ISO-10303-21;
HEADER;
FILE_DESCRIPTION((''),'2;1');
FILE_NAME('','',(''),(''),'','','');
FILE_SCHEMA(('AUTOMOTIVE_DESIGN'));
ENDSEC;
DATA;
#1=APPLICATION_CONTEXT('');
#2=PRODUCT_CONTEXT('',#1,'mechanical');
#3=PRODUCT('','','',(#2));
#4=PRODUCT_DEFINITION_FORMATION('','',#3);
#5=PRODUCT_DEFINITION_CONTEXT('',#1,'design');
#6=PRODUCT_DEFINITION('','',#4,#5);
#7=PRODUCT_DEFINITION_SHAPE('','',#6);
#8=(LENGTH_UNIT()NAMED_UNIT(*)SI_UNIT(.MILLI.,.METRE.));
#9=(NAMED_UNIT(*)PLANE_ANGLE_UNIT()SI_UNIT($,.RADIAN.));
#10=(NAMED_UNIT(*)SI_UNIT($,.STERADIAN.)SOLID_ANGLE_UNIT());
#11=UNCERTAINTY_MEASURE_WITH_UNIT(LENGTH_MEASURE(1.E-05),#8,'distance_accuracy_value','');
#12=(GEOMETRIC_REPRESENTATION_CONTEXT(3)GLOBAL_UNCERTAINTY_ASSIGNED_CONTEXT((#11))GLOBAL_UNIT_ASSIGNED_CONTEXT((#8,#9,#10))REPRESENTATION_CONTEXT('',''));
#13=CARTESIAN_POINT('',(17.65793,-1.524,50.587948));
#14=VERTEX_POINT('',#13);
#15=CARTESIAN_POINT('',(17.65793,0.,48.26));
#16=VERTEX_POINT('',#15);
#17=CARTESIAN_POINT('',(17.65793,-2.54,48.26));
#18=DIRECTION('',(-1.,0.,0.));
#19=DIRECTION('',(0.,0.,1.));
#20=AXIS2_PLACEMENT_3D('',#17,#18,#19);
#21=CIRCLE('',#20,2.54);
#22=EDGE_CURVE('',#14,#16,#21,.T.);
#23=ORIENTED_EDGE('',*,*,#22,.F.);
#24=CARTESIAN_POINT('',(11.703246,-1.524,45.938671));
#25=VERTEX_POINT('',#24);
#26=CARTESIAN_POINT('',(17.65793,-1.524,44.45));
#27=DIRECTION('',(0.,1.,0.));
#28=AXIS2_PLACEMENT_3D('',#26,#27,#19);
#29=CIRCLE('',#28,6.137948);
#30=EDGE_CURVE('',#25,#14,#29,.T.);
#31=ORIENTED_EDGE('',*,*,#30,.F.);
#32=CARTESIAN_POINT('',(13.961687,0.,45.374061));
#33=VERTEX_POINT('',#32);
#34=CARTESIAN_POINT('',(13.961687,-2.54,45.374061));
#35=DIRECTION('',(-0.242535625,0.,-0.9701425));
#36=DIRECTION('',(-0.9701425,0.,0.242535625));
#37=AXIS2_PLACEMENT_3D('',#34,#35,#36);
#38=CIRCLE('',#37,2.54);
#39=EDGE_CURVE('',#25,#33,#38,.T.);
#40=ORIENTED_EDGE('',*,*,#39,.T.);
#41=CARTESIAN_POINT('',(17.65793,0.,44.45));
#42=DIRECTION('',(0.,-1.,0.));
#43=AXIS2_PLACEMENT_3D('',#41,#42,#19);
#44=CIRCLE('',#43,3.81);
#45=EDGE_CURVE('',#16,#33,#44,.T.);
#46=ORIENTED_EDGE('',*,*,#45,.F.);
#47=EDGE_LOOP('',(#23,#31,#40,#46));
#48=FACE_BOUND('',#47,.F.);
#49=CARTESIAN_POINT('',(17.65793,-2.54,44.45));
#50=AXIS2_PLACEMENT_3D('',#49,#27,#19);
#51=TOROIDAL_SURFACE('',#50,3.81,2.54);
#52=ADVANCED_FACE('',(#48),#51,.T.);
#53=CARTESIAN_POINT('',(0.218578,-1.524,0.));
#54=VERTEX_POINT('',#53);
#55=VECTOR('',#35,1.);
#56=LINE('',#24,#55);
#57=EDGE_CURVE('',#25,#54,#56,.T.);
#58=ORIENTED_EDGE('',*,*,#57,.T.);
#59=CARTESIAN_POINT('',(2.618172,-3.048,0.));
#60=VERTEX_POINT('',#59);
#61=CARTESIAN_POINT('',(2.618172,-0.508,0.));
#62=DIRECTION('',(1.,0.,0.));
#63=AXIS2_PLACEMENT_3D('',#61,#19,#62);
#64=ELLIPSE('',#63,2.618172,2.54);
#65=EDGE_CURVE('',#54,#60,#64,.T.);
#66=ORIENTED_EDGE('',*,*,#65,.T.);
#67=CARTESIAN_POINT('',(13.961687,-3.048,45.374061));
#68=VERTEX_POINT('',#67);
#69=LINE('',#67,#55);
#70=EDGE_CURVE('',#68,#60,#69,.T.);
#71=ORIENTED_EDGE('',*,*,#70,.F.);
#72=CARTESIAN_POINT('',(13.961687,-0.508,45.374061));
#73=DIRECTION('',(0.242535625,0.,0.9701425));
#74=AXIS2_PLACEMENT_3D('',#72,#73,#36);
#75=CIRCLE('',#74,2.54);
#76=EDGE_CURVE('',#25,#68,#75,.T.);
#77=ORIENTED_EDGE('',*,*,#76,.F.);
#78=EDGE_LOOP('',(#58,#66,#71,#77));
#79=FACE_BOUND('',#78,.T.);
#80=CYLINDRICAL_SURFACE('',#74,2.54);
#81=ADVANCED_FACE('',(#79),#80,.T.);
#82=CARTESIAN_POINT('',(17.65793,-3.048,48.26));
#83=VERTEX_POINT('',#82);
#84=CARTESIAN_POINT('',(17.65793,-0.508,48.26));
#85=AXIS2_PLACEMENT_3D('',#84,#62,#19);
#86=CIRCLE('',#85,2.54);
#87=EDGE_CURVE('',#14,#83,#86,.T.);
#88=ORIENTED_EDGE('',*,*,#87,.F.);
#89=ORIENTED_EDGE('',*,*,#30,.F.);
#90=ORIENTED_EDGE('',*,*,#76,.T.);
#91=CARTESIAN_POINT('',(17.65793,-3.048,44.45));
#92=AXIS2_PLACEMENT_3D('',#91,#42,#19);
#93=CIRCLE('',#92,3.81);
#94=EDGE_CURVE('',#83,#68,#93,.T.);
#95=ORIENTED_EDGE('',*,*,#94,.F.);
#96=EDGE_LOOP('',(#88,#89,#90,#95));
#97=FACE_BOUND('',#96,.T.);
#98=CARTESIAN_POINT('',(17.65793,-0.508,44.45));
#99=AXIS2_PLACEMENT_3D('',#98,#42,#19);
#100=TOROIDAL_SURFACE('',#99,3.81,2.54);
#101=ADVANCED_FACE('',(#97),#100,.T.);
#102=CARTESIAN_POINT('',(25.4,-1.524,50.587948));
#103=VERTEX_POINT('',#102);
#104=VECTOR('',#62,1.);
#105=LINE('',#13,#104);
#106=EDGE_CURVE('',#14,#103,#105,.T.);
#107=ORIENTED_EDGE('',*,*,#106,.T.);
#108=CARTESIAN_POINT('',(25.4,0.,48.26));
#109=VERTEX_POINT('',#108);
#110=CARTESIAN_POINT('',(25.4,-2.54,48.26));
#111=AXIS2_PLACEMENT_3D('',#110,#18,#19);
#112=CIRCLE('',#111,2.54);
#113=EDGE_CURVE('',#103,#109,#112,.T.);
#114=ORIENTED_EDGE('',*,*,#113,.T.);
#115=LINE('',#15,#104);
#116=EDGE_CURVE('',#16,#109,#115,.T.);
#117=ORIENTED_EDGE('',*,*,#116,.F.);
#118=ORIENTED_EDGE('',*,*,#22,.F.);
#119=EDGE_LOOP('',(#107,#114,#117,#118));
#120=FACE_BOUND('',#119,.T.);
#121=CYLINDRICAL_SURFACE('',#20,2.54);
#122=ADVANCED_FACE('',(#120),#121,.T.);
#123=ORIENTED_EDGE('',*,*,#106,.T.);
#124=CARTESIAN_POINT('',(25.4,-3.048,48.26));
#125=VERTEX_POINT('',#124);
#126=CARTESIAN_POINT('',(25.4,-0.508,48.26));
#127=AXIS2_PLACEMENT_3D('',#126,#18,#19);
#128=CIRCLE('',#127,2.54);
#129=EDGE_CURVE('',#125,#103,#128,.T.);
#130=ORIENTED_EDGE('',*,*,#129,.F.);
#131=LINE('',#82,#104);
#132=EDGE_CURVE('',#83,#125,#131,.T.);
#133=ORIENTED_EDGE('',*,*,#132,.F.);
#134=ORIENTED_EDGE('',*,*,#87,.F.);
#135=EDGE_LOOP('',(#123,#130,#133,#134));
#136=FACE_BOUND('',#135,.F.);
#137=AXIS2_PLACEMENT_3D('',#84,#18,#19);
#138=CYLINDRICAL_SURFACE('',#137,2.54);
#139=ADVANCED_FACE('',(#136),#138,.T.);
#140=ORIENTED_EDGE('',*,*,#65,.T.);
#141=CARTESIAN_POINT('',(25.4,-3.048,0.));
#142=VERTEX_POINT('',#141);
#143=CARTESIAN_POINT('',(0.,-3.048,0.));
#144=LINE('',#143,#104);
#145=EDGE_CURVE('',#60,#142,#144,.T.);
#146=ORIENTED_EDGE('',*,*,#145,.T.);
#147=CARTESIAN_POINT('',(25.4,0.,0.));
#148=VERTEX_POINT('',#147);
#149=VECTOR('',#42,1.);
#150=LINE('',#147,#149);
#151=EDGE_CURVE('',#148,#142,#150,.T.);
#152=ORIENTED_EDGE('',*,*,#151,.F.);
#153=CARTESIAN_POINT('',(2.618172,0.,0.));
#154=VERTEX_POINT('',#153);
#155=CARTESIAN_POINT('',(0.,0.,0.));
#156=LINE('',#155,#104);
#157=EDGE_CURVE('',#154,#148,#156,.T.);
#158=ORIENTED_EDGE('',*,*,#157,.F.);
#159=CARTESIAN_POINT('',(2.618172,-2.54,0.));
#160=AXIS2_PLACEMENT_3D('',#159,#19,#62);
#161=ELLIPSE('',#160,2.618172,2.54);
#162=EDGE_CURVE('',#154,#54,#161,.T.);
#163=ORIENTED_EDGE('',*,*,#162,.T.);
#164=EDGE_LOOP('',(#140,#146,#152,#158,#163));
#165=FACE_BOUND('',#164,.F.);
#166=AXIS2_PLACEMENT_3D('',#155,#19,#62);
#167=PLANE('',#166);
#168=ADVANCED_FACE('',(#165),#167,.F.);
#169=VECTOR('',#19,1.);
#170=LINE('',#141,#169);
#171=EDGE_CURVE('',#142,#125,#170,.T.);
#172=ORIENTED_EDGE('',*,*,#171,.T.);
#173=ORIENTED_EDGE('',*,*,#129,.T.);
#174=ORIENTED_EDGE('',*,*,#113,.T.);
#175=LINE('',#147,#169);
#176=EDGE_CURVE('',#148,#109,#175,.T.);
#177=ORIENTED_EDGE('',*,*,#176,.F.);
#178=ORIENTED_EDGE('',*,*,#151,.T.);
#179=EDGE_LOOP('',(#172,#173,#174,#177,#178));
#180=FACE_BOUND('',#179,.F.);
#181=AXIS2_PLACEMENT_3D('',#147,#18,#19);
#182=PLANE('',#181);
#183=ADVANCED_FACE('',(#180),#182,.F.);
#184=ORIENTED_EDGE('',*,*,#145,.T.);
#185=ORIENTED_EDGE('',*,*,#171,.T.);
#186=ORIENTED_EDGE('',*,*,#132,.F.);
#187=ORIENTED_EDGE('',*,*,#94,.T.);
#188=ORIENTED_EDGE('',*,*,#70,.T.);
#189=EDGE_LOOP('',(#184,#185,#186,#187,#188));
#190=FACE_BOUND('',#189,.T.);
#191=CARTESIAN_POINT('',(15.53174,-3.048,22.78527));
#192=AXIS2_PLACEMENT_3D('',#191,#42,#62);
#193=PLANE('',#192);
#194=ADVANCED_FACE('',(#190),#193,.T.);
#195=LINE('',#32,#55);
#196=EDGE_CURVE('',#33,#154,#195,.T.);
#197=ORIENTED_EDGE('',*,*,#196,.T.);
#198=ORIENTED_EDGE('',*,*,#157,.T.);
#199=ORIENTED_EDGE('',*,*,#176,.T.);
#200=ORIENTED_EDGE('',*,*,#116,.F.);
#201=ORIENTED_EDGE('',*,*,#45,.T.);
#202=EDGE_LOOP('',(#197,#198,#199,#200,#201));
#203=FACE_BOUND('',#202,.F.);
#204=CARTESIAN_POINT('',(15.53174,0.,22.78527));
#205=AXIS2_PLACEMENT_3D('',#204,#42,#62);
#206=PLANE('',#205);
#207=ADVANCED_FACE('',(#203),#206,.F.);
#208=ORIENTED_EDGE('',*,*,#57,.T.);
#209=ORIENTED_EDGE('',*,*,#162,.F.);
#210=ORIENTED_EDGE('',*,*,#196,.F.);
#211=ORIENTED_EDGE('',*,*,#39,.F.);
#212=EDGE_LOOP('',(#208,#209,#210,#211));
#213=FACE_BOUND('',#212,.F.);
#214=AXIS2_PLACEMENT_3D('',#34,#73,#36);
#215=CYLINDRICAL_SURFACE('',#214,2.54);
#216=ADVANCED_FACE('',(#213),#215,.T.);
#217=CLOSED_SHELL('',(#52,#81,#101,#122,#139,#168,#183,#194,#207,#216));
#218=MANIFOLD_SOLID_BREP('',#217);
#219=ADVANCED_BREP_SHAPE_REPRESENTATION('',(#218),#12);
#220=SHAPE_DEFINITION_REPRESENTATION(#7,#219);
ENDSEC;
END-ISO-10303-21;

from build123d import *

# Parameters (mm, degrees)
F1_DEPTH    = 3.048
F2_T1_DEPTH = 53.7555112647
F2_T3_DEPTH = 14.0920698193
F2_T6_ANGLE = 75.9637565321
F2_T8_ANGLE = 75.9637565321


# Not quite as in the source:
# - a fillet or chamfer that OpenCascade refuses, or shapes differently, is made with other operations: its cross-section is extruded or revolved along the edge and cut away or added


with BuildPart() as f1:
    # F0 (on Front) → F1 (new body)
    with BuildSketch(Plane.XZ):
        with BuildLine():
            Line((25.4, 50.8), (17.6579301807, 50.8))
            ThreePointArc((17.6579301807, 50.8), (13.750062651, 49.4551045314), (11.4975253047, 45.990101219))
            Line((11.4975253047, 45.990101219), (0, 0))
            Line((0, 0), (25.4, 0))
            Line((25.4, 0), (25.4, 50.8))
        make_face()
    extrude(amount=F1_DEPTH)

    # F2: fillet of radius 2.54 on 2 edges, made by hand

    # F2_s2 → F2_t1 (cut)
    with BuildSketch(Plane(origin=(11.4975253047, 0, 45.990101219), x_dir=(0, 1, 0), z_dir=(-0.242535625, 0, -0.9701425001))):
        with BuildLine():
            ThreePointArc((-0.508, 0), (-2.3040512242, 0.7439487758), (-3.048, 2.54))
            Line((-3.048, 2.54), (-3.048, 0))
            Line((-3.048, 0), (-0.508, 0))
        make_face()
        with BuildLine():
            ThreePointArc((-2.54, 0), (-0.7439487758, 0.7439487758), (0, 2.54))
            Line((0, 2.54), (0, 0))
            Line((0, 0), (-2.54, 0))
        make_face()
    extrude(amount=F2_T1_DEPTH, mode=Mode.SUBTRACT)

    # F2_s4 → F2_t3 (cut)
    with BuildSketch(Plane.YZ.offset(17.6579301807)):
        with BuildLine():
            ThreePointArc((-2.54, 50.8), (-0.7439487758, 50.0560512242), (0, 48.26))
            Line((0, 48.26), (0, 50.8))
            Line((0, 50.8), (-2.54, 50.8))
        make_face()
        with BuildLine():
            ThreePointArc((-0.508, 50.8), (-2.3040512242, 50.0560512242), (-3.048, 48.26))
            Line((-3.048, 48.26), (-3.048, 50.8))
            Line((-3.048, 50.8), (-0.508, 50.8))
        make_face()
    extrude(amount=F2_T3_DEPTH, mode=Mode.SUBTRACT)

    # F2_s5 → F2_t6 (revolve, cut)
    with BuildSketch(Plane.YZ.offset(17.6579301807)):
        with BuildLine():
            ThreePointArc((-2.54, 50.8), (-0.7439487758, 50.0560512242), (0, 48.26))
            Line((0, 48.26), (0, 50.8))
            Line((0, 50.8), (-2.54, 50.8))
        make_face()
    revolve(axis=Axis((17.6579301807, 0, 44.45), (0, -1, 0)), revolution_arc=F2_T6_ANGLE, mode=Mode.SUBTRACT)

    # F2_s7 → F2_t8 (revolve, cut)
    with BuildSketch(Plane.YZ.offset(17.6579301807)):
        with BuildLine():
            ThreePointArc((-0.508, 50.8), (-2.3040512242, 50.0560512242), (-3.048, 48.26))
            Line((-3.048, 48.26), (-3.048, 50.8))
            Line((-3.048, 50.8), (-0.508, 50.8))
        make_face()
    revolve(axis=Axis((17.6579301807, -3.048, 44.45), (0, -1, 0)), revolution_arc=F2_T8_ANGLE, mode=Mode.SUBTRACT)


solid = f1.part
